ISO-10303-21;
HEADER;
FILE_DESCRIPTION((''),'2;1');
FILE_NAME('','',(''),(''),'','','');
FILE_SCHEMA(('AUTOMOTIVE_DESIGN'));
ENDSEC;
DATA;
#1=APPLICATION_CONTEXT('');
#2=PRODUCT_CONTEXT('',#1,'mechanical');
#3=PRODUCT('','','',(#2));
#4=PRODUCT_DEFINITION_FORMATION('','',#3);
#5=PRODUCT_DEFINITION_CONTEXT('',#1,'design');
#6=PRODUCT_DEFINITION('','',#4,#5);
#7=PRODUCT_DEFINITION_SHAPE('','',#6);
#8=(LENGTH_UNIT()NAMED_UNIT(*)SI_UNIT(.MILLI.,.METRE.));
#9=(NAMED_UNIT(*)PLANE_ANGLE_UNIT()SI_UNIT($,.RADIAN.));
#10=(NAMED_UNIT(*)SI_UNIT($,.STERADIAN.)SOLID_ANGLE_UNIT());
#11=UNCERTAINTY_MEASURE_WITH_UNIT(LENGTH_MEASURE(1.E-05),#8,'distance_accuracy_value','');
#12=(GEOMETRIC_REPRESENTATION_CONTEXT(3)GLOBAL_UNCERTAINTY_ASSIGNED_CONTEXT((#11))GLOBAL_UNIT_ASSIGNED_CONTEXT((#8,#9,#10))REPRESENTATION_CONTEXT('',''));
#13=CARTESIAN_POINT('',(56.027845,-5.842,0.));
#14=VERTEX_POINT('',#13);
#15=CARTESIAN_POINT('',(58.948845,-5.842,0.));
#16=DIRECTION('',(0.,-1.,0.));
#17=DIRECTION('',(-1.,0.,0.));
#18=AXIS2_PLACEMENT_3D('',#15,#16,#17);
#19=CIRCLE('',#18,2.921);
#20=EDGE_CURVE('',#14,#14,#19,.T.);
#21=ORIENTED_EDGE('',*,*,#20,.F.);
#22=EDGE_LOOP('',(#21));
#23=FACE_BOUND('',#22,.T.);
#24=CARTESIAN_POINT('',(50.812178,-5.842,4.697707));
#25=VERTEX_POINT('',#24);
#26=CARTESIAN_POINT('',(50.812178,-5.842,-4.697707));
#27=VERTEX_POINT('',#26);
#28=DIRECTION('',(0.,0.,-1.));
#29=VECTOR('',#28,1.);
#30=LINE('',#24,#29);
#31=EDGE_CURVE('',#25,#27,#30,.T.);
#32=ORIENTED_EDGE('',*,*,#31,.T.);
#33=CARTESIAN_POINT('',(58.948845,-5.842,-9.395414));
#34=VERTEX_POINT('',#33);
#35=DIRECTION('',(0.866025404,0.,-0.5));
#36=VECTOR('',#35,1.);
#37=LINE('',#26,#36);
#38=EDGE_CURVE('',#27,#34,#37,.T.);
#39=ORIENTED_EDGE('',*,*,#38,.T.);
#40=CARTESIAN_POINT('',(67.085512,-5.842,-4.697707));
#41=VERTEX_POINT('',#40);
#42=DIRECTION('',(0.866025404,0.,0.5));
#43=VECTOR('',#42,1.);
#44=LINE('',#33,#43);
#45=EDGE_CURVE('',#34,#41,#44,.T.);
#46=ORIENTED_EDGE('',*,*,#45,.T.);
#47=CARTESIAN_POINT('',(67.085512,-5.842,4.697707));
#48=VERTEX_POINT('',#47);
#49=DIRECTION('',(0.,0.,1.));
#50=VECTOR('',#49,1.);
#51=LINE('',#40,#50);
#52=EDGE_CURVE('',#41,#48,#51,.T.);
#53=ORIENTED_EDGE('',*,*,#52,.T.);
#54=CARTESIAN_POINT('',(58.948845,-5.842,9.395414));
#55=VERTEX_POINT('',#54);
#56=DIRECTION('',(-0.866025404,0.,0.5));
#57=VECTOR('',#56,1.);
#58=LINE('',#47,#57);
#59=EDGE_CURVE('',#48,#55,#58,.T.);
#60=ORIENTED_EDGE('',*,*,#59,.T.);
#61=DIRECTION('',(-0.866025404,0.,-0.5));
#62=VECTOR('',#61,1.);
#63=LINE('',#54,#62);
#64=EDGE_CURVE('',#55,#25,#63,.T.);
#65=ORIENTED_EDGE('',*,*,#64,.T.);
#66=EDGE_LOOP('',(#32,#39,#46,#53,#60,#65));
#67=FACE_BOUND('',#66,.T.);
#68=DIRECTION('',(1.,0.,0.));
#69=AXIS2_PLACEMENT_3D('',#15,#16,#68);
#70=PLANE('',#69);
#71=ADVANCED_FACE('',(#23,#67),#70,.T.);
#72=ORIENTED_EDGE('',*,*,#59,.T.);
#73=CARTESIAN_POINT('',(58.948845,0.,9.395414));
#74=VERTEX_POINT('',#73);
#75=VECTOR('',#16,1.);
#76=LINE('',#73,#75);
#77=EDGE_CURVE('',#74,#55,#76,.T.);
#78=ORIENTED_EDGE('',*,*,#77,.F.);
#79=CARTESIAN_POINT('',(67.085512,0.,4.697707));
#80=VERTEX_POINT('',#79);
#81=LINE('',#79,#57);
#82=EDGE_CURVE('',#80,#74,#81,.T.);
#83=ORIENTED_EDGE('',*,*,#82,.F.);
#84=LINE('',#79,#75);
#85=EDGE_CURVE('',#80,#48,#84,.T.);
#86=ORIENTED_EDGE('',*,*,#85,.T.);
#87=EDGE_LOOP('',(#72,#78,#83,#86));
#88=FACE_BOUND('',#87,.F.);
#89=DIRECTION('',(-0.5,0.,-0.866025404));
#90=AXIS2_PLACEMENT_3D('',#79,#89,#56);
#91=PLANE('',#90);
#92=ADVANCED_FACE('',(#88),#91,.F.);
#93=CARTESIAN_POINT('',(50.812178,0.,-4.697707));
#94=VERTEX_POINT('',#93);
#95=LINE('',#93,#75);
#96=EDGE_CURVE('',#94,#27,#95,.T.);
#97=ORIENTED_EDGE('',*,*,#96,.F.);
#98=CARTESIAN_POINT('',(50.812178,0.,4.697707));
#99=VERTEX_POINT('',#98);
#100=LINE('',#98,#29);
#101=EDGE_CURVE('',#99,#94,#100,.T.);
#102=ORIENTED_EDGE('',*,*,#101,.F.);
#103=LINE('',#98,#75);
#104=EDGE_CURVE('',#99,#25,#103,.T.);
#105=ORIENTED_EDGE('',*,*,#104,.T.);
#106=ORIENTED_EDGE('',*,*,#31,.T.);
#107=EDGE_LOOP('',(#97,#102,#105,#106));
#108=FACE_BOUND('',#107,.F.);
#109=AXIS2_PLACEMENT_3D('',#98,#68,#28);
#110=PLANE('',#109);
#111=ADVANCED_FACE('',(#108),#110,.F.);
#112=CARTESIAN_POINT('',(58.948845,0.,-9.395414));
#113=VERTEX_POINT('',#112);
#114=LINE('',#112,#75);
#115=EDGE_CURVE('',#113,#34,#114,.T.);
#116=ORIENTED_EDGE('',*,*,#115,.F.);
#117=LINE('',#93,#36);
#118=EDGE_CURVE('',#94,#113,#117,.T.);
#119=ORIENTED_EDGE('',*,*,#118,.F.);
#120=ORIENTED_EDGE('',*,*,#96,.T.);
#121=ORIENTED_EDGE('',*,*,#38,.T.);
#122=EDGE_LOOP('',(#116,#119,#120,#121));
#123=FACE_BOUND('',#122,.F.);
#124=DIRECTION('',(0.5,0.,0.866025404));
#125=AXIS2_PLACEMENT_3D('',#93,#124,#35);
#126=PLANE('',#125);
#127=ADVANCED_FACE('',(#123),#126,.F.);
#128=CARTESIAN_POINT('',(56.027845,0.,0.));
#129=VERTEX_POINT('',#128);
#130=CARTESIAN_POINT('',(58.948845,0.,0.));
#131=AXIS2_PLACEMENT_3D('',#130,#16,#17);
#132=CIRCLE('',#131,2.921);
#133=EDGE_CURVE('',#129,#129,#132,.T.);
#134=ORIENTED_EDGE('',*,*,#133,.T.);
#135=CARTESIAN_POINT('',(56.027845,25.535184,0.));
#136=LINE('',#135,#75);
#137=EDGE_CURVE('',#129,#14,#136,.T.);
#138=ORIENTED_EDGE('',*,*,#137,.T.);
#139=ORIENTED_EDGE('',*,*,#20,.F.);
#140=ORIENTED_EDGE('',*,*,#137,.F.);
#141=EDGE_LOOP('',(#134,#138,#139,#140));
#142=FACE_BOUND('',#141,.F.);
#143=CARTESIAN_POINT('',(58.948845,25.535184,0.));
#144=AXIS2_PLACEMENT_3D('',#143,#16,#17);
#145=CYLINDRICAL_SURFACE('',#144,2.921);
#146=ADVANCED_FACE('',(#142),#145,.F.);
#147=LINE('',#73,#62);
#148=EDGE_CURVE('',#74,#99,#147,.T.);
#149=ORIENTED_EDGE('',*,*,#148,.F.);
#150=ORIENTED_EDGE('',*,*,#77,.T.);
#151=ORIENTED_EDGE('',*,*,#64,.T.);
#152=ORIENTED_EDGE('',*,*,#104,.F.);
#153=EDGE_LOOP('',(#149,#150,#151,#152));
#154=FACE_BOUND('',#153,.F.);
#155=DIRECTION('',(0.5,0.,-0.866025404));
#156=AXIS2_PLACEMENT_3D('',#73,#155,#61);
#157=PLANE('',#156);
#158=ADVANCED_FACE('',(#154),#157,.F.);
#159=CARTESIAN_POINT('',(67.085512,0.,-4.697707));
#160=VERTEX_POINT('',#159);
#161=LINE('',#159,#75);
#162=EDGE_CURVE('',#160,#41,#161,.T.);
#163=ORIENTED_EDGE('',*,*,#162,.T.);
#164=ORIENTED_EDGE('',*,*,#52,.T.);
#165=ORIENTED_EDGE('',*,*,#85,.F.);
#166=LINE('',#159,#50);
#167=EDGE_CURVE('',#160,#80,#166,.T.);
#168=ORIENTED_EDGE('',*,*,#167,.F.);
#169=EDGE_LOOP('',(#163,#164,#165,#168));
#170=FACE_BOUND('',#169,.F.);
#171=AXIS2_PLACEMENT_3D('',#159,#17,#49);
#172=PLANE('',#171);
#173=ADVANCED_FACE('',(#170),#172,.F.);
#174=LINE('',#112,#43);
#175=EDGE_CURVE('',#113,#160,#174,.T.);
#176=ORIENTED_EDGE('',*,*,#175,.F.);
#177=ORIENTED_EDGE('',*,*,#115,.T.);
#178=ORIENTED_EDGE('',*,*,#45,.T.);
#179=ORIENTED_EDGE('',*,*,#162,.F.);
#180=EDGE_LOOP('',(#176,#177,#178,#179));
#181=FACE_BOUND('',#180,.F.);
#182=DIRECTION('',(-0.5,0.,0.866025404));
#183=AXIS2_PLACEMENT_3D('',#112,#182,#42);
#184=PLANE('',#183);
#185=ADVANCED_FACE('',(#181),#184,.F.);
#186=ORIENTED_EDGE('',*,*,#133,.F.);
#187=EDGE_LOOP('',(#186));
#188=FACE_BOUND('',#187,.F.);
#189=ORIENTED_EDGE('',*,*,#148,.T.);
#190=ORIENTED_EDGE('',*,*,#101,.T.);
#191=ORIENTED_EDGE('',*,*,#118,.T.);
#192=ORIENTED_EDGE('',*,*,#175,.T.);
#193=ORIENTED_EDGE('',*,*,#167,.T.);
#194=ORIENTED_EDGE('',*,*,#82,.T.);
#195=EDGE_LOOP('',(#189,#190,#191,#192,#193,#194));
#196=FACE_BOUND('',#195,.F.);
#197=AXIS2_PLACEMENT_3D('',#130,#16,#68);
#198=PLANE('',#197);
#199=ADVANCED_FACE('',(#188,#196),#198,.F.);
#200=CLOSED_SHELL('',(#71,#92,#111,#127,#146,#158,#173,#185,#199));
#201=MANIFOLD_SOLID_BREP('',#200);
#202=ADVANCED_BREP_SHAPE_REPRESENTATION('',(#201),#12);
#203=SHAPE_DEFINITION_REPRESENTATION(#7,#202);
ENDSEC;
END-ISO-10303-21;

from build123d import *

# Parameters (mm, degrees)
F1_DEPTH = 5.842
F2_D     = 5.842


# Not quite as in the source:
# - a feature names something its author has since deleted; it is built from what else it names


with BuildPart() as f1:
    # F0 (on Front) → F1 (new body)
    with BuildSketch(Plane.XZ):
        Polygon((58.9488451577, 9.395414032), (50.8121779269, 4.697707016), (50.8121779269, -4.697707016), (58.9488451577, -9.395414032), (67.0855123886, -4.697707016), (67.0855123886, 4.697707016), align=None)
    extrude(amount=F1_DEPTH)

    # F2 (through all)
    with Locations(Plane(origin=(0, 0, 0), x_dir=(1, 0, 0), z_dir=(0, 1, 0))):
        with Locations((58.9488451577, 0)):
            Hole(F2_D / 2)


solid = f1.part
